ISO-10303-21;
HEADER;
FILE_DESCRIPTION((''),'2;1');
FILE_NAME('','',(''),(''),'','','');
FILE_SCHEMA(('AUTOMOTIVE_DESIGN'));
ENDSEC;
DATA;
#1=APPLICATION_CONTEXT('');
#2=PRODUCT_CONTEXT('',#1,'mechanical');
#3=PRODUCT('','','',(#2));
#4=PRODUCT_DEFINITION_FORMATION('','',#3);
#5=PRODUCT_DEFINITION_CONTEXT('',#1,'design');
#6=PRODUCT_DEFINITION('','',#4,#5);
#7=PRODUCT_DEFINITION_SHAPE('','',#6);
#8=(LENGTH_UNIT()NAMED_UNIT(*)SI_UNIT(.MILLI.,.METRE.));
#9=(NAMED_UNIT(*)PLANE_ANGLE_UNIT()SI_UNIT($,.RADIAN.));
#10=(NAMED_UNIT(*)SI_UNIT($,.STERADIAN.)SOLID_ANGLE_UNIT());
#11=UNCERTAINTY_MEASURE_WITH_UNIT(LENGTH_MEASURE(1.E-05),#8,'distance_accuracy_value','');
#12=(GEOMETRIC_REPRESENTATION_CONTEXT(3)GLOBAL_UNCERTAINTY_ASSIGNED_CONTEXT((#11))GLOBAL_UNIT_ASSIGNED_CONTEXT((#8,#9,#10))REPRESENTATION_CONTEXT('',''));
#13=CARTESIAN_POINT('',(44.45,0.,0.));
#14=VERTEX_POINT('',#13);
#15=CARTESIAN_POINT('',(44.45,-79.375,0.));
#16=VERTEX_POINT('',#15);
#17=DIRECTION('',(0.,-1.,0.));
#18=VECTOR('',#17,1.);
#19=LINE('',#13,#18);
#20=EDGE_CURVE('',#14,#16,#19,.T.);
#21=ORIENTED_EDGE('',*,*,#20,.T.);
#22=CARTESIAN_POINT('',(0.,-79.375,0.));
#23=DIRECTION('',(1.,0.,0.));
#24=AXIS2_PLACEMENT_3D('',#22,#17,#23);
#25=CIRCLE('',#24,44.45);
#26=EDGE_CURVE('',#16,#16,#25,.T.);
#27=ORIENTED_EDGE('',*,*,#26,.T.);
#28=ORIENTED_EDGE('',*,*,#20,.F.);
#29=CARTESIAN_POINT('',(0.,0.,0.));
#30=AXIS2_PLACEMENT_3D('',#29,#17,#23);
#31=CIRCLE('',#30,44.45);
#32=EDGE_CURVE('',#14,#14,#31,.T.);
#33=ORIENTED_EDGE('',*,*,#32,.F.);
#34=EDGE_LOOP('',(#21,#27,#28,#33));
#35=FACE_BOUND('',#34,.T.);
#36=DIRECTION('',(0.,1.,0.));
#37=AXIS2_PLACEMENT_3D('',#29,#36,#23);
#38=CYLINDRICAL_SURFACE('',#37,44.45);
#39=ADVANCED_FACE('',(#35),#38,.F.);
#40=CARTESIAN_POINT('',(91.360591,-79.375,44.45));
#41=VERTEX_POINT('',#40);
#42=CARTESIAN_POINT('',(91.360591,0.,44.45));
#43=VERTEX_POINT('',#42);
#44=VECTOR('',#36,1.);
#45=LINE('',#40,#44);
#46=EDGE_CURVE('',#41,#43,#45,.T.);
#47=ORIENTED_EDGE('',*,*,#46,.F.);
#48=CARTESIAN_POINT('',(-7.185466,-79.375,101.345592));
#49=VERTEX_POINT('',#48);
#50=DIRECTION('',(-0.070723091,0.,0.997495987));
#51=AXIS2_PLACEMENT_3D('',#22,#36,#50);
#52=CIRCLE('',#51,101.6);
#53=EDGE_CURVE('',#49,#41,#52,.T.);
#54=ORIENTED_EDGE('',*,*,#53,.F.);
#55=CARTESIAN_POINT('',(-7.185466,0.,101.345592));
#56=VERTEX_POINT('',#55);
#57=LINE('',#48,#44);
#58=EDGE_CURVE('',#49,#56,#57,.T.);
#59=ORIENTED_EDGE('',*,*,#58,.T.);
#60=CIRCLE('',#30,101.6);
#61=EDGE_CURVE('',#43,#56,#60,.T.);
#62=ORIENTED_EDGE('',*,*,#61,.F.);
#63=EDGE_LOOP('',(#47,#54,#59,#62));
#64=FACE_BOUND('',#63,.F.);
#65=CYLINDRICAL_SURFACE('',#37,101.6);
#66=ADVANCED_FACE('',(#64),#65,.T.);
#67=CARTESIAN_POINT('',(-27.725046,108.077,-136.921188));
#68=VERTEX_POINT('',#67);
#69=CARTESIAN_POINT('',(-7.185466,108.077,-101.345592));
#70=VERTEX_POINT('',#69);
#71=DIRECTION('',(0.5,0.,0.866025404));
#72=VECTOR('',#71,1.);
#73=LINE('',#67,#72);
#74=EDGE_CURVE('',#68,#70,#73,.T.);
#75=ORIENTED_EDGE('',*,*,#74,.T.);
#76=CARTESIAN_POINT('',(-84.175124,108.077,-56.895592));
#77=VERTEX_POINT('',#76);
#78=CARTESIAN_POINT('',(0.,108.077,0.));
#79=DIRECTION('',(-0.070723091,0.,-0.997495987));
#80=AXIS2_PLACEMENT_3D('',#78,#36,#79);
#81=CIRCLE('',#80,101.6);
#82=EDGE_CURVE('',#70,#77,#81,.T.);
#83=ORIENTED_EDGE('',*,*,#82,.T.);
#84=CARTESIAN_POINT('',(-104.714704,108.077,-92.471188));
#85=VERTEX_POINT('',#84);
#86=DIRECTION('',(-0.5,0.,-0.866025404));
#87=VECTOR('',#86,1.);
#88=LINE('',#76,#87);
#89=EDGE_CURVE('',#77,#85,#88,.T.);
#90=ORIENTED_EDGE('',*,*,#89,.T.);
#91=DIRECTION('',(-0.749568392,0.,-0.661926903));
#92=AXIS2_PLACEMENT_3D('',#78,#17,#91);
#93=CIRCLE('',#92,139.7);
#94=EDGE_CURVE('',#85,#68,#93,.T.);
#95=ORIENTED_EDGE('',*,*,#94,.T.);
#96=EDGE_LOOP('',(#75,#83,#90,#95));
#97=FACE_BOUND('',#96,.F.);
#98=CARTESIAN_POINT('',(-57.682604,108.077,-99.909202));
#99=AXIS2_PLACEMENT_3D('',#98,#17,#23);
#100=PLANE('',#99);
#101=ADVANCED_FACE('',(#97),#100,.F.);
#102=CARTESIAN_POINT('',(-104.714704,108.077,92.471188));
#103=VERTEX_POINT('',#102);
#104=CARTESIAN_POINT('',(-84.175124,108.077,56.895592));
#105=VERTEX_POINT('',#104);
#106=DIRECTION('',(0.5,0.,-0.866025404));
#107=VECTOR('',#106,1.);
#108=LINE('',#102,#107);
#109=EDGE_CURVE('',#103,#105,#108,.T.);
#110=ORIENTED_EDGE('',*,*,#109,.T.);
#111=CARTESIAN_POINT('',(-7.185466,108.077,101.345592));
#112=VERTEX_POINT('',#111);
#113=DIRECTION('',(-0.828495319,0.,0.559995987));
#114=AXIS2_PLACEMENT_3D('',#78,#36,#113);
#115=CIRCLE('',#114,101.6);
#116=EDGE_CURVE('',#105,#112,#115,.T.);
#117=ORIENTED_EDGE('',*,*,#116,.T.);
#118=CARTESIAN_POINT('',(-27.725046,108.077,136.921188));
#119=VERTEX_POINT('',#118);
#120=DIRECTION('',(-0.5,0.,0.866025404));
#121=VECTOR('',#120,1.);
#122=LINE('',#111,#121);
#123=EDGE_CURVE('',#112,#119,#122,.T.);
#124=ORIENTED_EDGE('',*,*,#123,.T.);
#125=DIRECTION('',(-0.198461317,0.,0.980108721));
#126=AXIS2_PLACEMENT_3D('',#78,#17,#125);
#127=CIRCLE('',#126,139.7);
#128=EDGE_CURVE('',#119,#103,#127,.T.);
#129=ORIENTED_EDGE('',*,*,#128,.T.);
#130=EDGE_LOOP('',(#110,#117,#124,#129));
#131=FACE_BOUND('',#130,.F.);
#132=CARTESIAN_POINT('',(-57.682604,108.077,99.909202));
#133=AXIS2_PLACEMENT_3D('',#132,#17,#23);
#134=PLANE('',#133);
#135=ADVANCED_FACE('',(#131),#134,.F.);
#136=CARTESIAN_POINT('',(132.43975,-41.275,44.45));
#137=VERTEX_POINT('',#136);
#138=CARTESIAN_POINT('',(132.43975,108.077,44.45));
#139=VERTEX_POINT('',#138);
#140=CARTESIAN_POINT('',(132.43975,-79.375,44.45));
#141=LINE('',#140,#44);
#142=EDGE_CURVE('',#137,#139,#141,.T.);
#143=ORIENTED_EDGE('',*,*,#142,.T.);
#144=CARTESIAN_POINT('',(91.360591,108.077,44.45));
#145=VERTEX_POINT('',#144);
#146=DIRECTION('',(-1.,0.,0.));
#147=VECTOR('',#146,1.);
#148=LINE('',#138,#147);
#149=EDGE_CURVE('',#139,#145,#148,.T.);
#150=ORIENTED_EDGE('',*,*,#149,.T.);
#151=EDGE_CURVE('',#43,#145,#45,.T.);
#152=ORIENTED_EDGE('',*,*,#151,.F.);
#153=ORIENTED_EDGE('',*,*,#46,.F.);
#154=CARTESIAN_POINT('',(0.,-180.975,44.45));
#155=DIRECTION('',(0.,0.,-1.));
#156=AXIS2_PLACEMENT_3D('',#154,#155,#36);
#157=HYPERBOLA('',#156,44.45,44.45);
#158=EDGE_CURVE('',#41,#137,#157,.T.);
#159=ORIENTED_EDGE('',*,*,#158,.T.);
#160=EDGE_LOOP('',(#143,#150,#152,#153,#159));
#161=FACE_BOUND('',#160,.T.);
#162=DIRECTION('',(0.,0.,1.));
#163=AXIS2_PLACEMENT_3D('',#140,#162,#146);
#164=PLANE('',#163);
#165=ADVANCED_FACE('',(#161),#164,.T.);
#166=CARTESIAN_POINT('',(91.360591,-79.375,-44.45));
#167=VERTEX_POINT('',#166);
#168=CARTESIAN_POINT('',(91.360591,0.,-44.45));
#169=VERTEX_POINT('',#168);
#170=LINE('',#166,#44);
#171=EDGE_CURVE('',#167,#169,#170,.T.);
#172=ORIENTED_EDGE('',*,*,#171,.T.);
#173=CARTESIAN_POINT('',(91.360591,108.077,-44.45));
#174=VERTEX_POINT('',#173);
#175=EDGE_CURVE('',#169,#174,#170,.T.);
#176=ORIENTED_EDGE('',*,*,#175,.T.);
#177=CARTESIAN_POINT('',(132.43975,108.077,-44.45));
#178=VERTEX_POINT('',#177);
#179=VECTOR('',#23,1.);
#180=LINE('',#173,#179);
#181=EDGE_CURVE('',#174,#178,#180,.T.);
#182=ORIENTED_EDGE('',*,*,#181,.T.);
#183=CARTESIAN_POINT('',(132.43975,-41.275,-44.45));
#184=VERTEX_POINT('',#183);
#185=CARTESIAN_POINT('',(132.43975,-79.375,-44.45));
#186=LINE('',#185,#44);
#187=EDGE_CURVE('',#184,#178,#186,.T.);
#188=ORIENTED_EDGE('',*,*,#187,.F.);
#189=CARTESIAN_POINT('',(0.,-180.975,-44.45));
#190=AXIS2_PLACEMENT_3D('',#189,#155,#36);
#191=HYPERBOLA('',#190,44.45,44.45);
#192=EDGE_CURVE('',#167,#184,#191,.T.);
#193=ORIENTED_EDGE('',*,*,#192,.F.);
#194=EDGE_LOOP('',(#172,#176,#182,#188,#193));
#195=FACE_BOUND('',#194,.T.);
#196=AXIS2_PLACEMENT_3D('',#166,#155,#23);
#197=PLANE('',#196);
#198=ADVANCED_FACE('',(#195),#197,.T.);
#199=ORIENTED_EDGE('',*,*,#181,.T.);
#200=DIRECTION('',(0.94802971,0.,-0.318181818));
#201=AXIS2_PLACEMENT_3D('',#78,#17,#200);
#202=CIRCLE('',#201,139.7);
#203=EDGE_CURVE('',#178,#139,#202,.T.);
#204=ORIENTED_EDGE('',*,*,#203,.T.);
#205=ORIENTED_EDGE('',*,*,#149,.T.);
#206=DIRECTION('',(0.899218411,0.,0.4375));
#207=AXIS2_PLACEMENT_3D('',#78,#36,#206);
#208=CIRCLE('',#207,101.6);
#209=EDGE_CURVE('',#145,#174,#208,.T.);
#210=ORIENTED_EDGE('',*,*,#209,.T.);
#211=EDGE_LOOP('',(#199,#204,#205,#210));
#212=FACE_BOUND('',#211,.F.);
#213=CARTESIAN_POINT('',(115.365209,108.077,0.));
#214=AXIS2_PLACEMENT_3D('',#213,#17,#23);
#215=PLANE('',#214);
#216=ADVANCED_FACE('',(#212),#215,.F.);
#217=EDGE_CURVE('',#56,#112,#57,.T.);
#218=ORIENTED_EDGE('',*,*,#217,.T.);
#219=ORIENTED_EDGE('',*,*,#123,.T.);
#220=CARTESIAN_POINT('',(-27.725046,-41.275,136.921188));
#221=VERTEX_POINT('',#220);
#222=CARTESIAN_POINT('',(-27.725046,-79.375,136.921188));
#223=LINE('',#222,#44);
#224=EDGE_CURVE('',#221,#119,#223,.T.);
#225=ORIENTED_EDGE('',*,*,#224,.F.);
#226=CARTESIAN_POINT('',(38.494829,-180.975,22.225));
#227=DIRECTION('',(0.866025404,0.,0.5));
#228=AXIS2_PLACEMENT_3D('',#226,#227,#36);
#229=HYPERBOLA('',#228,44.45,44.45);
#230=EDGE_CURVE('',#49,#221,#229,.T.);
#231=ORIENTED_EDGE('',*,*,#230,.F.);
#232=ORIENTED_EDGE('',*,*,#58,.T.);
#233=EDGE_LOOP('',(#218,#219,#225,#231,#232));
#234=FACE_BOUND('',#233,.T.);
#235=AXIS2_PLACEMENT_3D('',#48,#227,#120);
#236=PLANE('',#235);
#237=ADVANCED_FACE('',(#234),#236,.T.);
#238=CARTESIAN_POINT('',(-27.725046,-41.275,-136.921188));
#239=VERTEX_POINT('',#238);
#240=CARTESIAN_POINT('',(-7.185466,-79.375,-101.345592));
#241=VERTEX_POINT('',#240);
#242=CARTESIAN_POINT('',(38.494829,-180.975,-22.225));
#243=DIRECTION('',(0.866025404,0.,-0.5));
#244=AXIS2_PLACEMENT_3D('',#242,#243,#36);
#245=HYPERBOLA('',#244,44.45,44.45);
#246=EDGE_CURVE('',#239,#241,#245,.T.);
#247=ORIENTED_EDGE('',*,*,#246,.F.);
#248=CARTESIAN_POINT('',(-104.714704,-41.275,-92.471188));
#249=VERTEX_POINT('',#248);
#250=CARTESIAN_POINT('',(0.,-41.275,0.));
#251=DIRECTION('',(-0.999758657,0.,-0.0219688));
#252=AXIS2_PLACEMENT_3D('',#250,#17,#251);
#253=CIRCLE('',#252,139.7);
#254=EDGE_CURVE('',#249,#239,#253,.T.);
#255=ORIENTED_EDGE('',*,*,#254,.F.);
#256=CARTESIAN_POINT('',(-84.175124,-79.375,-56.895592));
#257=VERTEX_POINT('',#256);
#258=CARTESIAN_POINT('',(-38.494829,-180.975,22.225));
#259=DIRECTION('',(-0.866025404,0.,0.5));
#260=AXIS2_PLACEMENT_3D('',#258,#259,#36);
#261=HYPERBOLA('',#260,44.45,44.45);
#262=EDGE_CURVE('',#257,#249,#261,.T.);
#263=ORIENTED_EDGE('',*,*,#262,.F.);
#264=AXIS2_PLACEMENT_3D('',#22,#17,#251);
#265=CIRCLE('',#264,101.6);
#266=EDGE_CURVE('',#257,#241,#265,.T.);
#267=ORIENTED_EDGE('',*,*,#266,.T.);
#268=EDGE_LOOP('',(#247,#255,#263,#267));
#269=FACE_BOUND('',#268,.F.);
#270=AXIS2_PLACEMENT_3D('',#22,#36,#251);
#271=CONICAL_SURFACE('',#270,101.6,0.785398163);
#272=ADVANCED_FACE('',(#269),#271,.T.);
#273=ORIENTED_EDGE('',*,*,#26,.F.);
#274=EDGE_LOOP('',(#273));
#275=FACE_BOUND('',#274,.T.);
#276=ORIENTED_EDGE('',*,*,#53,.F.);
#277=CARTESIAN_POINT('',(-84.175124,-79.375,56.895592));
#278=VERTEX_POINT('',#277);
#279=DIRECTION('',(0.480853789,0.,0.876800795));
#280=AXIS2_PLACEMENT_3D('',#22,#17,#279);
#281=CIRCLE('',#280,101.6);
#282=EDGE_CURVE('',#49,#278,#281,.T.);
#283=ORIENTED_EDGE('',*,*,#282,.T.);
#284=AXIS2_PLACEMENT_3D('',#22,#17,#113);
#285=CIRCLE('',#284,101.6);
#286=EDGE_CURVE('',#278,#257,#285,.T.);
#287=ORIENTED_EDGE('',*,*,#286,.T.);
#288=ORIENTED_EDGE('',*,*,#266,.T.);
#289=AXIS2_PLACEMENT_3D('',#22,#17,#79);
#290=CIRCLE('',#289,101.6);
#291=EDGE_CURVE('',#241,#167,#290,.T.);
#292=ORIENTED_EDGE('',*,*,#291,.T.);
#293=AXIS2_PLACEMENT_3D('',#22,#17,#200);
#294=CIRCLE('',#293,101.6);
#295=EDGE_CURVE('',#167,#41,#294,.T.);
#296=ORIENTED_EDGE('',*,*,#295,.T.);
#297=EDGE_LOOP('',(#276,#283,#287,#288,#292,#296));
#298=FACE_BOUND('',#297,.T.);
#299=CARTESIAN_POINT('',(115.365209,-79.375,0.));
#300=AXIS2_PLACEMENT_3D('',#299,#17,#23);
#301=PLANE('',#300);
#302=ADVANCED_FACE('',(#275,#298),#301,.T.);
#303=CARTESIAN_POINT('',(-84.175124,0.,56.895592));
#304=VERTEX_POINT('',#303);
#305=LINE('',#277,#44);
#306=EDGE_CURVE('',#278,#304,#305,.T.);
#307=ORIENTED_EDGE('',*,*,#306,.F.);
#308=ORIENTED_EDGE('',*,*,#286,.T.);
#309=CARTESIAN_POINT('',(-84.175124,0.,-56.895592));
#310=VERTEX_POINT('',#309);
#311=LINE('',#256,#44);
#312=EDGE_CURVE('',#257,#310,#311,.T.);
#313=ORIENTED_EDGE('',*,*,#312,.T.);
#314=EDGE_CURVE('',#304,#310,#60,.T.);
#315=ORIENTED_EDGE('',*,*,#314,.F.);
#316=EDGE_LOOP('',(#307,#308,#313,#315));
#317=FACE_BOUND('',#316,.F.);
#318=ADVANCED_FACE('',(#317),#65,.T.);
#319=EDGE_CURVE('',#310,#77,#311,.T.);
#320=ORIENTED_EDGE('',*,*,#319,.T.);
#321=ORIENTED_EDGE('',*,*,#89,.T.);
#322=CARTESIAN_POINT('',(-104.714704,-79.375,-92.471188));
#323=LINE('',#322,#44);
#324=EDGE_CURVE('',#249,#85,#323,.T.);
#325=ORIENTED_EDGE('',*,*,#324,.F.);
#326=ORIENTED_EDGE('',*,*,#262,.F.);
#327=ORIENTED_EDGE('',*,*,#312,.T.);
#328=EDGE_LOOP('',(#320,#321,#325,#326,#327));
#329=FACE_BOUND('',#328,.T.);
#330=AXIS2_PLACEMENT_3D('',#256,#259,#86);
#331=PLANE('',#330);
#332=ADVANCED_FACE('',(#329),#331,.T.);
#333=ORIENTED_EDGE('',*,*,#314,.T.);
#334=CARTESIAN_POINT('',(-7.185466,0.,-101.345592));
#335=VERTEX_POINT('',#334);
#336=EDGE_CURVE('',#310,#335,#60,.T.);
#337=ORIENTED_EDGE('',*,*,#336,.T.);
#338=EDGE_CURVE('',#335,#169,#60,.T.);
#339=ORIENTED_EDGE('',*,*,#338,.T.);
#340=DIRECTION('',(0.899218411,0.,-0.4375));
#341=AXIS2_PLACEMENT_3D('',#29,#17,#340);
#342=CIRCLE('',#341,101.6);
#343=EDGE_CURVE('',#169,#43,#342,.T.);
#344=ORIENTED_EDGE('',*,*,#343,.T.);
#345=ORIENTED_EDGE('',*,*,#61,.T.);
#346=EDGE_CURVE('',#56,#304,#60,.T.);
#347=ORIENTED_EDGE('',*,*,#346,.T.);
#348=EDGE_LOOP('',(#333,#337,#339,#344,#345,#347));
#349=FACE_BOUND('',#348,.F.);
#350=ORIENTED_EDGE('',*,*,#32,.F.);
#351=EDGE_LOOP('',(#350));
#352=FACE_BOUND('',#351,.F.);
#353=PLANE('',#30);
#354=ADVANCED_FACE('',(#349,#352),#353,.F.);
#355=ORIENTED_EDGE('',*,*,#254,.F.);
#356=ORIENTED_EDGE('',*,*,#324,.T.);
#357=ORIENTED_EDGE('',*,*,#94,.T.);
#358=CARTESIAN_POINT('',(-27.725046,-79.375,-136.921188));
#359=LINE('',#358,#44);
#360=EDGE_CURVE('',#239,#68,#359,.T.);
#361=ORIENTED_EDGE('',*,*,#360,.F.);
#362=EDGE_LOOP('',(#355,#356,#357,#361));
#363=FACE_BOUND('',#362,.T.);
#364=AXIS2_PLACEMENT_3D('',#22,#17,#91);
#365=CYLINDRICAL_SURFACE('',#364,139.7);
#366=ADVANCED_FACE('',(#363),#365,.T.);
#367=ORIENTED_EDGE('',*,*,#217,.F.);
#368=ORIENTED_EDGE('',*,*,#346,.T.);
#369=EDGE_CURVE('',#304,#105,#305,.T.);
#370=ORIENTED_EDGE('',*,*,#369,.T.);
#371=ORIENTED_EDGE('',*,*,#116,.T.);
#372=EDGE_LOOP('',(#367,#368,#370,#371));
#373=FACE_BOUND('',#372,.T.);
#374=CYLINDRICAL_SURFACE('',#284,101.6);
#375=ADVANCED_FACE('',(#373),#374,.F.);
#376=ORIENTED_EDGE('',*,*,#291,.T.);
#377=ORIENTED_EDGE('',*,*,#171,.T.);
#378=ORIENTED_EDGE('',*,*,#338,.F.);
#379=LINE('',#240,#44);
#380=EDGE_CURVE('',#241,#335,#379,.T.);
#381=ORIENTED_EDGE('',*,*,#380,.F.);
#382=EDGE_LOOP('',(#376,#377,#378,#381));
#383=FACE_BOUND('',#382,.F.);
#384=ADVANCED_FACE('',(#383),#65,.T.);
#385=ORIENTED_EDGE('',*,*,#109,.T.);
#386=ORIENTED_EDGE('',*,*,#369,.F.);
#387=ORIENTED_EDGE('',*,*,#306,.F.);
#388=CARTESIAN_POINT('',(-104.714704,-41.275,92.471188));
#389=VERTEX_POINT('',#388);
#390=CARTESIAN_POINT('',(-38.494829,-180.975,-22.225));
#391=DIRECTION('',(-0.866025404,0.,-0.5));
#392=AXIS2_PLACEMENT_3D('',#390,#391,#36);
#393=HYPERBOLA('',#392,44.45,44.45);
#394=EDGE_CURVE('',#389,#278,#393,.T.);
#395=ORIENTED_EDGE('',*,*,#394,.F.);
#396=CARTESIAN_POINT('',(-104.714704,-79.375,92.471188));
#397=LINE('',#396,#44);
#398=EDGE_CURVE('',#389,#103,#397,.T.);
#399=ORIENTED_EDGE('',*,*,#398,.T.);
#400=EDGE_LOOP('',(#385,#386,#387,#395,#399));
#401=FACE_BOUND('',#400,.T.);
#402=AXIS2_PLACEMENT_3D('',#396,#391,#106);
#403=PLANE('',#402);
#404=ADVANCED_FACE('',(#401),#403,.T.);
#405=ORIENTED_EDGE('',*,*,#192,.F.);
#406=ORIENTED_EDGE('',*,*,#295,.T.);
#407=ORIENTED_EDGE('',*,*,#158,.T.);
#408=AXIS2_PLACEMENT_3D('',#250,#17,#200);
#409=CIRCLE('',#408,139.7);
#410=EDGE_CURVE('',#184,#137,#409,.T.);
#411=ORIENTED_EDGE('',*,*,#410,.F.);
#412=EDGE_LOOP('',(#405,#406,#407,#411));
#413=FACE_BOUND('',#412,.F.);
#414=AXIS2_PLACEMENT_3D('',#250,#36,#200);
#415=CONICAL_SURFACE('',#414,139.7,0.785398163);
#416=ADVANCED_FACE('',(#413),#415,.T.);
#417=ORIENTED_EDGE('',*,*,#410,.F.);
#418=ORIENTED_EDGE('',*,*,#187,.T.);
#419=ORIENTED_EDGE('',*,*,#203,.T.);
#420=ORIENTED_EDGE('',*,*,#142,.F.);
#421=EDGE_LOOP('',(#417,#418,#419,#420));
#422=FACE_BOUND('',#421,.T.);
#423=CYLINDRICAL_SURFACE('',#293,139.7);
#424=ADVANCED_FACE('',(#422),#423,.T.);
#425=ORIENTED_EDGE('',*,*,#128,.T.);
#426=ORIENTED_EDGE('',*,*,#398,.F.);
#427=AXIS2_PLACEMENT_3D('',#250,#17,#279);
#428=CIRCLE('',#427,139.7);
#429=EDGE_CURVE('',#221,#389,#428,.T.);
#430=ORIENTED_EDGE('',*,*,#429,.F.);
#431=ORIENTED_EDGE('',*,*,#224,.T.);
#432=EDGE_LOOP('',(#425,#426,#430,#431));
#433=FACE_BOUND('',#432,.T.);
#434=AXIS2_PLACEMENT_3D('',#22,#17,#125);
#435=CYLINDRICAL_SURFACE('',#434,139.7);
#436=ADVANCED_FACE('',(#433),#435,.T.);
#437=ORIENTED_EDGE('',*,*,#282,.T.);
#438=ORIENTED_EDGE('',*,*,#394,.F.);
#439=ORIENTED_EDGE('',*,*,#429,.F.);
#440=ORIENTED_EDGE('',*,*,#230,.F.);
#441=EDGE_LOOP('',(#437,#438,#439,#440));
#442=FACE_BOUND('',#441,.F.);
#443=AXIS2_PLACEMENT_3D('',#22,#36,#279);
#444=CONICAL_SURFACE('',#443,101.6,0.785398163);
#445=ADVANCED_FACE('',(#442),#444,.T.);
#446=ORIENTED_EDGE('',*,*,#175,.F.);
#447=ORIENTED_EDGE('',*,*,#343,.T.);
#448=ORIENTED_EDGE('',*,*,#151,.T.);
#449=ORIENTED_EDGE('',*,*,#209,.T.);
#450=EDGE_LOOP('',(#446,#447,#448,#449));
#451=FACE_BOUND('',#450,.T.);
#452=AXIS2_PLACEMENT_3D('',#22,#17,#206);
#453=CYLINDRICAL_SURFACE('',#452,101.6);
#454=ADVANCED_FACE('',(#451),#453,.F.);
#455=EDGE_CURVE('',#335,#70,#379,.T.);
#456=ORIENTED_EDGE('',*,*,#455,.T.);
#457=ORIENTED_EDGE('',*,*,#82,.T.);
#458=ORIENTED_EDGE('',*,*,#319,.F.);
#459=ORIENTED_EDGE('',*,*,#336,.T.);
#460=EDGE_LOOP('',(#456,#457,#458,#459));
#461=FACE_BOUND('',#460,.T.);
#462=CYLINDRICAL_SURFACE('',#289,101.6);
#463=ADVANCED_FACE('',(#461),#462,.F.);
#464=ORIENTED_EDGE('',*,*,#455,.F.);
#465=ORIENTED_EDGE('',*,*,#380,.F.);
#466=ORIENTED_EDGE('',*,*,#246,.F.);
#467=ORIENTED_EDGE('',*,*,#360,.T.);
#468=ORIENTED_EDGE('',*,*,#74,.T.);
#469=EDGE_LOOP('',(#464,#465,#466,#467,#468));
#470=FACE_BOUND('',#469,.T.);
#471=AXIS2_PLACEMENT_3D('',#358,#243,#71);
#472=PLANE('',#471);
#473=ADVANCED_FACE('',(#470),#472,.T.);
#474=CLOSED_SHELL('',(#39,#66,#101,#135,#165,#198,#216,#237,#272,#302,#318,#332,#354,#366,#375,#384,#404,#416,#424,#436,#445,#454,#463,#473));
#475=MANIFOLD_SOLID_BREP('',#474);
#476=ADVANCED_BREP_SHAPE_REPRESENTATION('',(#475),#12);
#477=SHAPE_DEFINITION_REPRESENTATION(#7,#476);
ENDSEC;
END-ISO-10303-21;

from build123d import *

# Parameters (mm, degrees)
F0_R        = 101.6
F0_R_2      = 44.45
F1_DEPTH    = 79.375
F3_DEPTH    = 187.452
F4_SIZE     = 38.1
F5_T2_ANGLE = 117.4823583848
F6_T2_ANGLE = 117.4823583848


# Not quite as in the source:
# - a fillet or chamfer that OpenCascade refuses, or shapes differently, is made with other operations: its cross-section is extruded or revolved along the edge and cut away or added


with BuildPart() as f1:
    # F0 (on Front) → F1 (new body)
    with BuildSketch(Plane.XZ):
        Circle(F0_R)
        Circle(F0_R_2, mode=Mode.SUBTRACT)
    extrude(amount=F1_DEPTH)

    # F2 (on face) → F3 (join)
    with BuildSketch(Plane.XZ.offset(79.375)):
        with BuildLine():
            Line((132.4397504528, 44.45), (91.3605905191, 44.45))
            ThreePointArc((91.3605905191, 44.45), (101.6, 0), (91.3605905191, -44.45))
            Line((91.3605905191, -44.45), (132.4397504528, -44.45))
            ThreePointArc((132.4397504528, -44.45), (139.7, 0), (132.4397504528, 44.45))
        make_face()
        with BuildLine():
            Line((-104.7147044246, 92.471188363), (-84.1751244578, 56.8955922943))
            ThreePointArc((-84.1751244578, 56.8955922943), (-50.8, 87.9881810245), (-7.1854660613, 101.3455922943))
            Line((-7.1854660613, 101.3455922943), (-27.7250460282, 136.921188363))
            ThreePointArc((-27.7250460282, 136.921188363), (-69.85, 120.9837489087), (-104.7147044246, 92.471188363))
        make_face()
        with BuildLine():
            Line((-27.7250460282, -136.921188363), (-7.1854660613, -101.3455922943))
            ThreePointArc((-7.1854660613, -101.3455922943), (-50.8, -87.9881810245), (-84.1751244578, -56.8955922943))
            Line((-84.1751244578, -56.8955922943), (-104.7147044246, -92.471188363))
            ThreePointArc((-104.7147044246, -92.471188363), (-69.85, -120.9837489087), (-27.7250460282, -136.921188363))
        make_face()
    extrude(amount=-F3_DEPTH)

    # F4
    f4_edges = [f1.edges().sort_by_distance(p)[0] for p in [
        (139.7, -79.375, 0),
    ]]
    chamfer(f4_edges, length=F4_SIZE)

    # F5: chamfer of 38.1 on 1 edges, made by hand

    # F5_s1 → F5_t2 (revolve, cut)
    with BuildSketch(Plane(origin=(0, 0, 0), x_dir=(0, 1, 0), z_dir=(-0.0219688003, 0, 0.9997586568))):
        Polygon((-79.375, 101.6), (-41.275, 139.7), (-79.375, 139.7), align=None)
    revolve(axis=Axis((0, -79.375, 0), (0, -1, 0)), revolution_arc=F5_T2_ANGLE, mode=Mode.SUBTRACT)

    # F6: chamfer of 38.1 on 1 edges, made by hand

    # F6_s1 → F6_t2 (revolve, cut)
    with BuildSketch(Plane(origin=(0, 0, 0), x_dir=(0, 1, 0), z_dir=(0.8768007946, 0, -0.4808537893))):
        Polygon((-79.375, 101.6), (-41.275, 139.7), (-79.375, 139.7), align=None)
    revolve(axis=Axis((0, -79.375, 0), (0, -1, 0)), revolution_arc=F6_T2_ANGLE, mode=Mode.SUBTRACT)


solid = f1.part
